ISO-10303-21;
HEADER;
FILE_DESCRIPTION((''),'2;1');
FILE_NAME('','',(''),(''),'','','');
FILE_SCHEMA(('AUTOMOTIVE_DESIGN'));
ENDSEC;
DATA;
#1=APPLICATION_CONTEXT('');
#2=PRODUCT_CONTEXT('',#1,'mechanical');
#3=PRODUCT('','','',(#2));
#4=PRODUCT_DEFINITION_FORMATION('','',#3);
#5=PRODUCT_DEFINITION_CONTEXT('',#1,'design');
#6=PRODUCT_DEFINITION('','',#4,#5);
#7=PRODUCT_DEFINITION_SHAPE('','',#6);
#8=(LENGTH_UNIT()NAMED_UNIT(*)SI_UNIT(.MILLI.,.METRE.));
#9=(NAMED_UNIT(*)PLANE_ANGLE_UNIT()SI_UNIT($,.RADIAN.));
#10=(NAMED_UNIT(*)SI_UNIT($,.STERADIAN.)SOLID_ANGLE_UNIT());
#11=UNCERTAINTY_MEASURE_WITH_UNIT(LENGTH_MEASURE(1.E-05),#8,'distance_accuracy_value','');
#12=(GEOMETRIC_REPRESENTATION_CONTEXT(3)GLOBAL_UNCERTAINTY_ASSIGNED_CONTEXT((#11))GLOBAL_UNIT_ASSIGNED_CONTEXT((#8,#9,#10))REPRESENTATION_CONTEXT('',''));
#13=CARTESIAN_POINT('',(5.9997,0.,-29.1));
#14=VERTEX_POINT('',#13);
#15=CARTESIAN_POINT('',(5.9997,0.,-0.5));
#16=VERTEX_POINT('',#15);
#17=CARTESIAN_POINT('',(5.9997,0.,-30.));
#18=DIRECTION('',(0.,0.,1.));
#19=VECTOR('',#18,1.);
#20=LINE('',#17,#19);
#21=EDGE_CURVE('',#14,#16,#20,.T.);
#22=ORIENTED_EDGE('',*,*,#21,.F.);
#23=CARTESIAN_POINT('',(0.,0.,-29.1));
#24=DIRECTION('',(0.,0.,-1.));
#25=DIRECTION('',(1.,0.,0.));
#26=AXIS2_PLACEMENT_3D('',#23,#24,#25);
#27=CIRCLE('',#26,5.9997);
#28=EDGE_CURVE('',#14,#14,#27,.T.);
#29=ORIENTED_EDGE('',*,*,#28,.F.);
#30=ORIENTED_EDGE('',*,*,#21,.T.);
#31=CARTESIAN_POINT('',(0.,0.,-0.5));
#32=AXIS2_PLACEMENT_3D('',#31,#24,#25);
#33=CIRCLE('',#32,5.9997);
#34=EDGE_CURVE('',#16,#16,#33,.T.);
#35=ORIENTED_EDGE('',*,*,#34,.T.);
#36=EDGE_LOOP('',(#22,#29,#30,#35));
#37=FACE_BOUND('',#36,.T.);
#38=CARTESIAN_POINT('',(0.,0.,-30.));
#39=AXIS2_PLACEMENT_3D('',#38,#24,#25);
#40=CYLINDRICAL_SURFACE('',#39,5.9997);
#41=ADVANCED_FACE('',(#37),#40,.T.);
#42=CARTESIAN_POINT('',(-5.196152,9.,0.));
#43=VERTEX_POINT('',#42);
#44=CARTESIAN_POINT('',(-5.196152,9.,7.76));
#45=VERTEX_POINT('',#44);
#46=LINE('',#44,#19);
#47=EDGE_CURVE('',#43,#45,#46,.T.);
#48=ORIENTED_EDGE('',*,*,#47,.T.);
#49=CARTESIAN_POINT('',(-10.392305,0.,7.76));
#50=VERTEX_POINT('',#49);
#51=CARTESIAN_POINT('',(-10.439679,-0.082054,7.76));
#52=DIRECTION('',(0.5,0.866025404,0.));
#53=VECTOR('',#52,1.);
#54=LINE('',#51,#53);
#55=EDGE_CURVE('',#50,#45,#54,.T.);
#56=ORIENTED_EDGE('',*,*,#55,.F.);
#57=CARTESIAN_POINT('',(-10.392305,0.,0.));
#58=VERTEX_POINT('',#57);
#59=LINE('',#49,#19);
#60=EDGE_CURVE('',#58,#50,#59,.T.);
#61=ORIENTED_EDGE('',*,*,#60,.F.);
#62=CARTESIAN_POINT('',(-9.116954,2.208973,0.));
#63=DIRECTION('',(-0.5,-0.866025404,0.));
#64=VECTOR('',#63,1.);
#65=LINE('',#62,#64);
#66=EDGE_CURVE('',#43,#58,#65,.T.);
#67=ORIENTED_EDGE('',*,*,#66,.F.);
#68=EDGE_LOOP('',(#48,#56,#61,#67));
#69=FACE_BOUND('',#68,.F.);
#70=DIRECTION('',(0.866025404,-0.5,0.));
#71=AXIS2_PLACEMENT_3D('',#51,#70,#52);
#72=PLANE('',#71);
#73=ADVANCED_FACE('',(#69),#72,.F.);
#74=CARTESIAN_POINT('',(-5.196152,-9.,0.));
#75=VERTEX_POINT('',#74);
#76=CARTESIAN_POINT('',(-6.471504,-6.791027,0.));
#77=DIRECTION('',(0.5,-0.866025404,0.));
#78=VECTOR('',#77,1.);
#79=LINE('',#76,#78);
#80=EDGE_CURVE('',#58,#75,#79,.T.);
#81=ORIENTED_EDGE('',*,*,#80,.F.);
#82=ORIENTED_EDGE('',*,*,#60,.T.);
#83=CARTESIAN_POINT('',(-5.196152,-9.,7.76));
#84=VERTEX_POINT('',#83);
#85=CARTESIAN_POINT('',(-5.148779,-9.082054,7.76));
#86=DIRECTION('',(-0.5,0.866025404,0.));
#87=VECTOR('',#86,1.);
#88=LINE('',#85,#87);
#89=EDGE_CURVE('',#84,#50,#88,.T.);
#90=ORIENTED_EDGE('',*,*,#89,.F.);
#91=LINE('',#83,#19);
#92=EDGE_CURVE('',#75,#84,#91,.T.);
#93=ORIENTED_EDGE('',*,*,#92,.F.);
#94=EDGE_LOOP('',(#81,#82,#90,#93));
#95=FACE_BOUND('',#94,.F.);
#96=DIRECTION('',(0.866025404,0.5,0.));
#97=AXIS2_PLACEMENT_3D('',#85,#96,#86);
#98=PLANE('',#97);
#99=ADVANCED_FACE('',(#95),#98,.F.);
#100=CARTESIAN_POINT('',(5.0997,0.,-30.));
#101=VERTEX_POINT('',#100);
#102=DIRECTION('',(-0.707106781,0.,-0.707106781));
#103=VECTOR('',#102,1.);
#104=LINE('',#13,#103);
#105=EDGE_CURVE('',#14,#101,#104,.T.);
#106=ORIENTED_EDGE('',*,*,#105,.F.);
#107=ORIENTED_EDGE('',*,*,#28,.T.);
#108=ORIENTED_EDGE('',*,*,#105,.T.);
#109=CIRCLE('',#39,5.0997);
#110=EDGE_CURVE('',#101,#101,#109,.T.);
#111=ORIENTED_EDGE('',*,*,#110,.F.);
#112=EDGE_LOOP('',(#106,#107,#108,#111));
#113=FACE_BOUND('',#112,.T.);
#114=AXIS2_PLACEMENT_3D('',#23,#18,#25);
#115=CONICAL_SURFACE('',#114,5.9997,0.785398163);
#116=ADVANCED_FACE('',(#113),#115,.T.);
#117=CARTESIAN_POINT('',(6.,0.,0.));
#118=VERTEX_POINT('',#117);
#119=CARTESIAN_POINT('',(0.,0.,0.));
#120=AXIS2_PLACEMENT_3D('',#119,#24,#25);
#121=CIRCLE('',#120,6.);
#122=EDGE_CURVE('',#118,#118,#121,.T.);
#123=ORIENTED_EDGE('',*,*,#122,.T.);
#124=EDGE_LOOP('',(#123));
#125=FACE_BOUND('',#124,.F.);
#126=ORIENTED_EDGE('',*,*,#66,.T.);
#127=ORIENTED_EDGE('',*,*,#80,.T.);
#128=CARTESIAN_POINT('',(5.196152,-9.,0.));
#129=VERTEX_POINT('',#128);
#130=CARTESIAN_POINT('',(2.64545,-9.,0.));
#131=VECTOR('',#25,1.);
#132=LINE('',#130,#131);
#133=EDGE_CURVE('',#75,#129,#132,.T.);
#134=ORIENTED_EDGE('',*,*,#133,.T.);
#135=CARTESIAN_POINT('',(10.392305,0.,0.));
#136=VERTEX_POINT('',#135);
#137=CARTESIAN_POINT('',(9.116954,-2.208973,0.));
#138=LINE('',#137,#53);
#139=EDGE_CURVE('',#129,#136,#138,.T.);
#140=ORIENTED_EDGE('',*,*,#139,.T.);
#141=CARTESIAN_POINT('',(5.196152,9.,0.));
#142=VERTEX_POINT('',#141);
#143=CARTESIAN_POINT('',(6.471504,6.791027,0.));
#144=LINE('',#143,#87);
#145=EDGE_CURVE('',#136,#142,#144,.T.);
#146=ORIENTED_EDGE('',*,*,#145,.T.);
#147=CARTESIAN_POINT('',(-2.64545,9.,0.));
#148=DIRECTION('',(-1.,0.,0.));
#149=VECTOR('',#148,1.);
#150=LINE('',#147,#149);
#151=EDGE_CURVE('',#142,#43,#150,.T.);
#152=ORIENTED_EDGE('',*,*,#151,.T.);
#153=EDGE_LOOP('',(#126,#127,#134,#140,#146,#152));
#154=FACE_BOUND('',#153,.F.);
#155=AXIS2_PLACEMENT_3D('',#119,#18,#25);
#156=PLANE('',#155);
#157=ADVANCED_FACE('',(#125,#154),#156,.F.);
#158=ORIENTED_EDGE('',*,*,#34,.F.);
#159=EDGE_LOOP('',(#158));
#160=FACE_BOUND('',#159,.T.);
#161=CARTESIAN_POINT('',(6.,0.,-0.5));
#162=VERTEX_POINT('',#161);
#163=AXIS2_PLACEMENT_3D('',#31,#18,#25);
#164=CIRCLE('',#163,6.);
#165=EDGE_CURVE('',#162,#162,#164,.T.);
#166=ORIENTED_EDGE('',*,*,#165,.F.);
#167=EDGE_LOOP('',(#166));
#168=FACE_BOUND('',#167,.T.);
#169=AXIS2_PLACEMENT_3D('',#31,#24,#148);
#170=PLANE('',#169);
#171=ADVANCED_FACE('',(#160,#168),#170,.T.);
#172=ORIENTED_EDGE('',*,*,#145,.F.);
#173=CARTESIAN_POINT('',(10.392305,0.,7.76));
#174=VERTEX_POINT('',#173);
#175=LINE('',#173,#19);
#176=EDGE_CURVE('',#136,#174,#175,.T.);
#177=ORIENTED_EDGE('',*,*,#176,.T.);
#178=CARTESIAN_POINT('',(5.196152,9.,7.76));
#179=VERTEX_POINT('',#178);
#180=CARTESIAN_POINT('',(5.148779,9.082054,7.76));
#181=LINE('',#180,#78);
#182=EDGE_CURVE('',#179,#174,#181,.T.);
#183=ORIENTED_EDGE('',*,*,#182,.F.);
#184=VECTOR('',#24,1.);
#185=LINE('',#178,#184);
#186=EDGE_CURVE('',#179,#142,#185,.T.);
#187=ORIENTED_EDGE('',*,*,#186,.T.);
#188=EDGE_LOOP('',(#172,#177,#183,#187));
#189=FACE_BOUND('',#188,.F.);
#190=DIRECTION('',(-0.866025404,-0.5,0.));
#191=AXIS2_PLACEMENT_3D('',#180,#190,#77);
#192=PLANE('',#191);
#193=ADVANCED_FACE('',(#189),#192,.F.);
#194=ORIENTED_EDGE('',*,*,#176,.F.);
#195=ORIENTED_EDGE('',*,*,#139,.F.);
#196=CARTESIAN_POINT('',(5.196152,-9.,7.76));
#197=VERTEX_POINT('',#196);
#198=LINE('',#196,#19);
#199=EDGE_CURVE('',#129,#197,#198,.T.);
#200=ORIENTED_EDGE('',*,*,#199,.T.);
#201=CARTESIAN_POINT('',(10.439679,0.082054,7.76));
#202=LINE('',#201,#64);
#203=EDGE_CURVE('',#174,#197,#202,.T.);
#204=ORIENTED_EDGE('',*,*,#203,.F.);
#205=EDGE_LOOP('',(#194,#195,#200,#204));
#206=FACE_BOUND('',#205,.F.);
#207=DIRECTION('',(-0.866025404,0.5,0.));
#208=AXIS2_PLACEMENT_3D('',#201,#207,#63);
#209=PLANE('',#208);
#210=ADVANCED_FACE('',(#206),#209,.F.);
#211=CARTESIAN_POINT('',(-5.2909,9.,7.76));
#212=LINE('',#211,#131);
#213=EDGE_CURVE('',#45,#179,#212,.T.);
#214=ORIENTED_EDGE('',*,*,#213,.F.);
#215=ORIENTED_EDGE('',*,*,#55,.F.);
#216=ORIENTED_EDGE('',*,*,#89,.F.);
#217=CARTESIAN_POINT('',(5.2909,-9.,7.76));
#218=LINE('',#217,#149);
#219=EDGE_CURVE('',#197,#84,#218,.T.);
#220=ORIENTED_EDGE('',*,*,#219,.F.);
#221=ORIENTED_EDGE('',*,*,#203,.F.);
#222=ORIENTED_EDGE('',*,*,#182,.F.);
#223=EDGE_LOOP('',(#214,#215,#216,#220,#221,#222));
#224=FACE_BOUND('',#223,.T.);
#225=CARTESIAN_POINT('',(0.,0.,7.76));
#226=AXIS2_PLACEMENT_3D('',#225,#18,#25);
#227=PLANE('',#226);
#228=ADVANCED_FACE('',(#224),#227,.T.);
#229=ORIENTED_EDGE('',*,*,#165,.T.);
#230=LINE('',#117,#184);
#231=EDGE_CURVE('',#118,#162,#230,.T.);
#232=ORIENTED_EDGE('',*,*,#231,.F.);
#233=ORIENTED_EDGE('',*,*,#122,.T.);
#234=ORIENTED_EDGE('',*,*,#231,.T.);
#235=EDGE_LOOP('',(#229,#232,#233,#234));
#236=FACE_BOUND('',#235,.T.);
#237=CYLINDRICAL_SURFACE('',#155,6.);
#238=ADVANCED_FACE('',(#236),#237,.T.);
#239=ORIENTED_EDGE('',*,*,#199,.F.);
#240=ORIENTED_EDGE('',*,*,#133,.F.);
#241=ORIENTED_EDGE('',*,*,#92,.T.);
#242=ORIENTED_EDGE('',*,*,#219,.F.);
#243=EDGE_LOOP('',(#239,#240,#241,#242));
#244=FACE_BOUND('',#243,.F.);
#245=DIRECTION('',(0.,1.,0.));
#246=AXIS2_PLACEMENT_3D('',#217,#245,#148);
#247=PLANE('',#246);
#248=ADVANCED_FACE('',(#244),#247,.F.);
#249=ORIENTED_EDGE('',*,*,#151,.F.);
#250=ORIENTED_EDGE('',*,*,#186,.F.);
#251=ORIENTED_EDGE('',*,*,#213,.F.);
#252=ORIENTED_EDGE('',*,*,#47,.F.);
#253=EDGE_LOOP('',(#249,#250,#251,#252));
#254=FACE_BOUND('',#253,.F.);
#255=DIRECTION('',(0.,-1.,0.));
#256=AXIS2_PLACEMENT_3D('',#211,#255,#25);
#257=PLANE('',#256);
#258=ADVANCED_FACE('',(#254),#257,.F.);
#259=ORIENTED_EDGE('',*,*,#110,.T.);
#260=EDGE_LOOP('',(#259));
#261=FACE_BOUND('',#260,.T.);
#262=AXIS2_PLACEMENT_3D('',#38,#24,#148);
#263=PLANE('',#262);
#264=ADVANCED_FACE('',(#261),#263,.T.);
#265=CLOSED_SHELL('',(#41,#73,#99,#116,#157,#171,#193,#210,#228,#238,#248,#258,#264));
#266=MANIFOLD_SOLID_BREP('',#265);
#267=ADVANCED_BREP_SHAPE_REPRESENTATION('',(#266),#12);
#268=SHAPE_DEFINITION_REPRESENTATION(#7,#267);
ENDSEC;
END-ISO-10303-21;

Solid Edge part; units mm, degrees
sketch "Sketch1" plane through (0, 0, 0) normal (0, 0, 1) x (1, 0, 0)
  circle A0 centre (0, 0) radius 10.44
  dimension "D1" = 20.88
extrude "Protrusion1" add sketch "Sketch1" along normal blind 7.76
sketch "Sketch2" plane through (0, 0, 0) normal (0, 0, -1) x (1, 0, 0)
  circle A0 centre (0, 0) radius 6
extrude "Protrusion2" add sketch "Sketch2" along normal blind 30
sketch "Sketch3" plane through (0, 0, -30) normal (0, 0, -1) x (1, 0, 0)
  circle A0 centre (0, 0) radius 5.9997
extrude "Cutout1" cut sketch "Sketch3" against normal blind 29.5 flip side to cut
chamfer "Chamfer_1" distance 0.9 angle 45 1 edges at (-5.9997, 0, -30)
sketch "Sketch4" plane through (0, 0, 7.76) normal (0, 0, 1) x (1, 0, 0)
  line L0 (-5.2909, 9) -> (5.2909, 9)
  dimension "D1" = 18
extrude "Cutout2" cut sketch "Sketch4" against normal up to next material side at (0, 9.05, 7.76)
pattern_circular "Pattern1" count 6 over 360 about axis through (0, 0, 7.76) along (0, 0, 1) of "Cutout2"
properties part number "24104511"
